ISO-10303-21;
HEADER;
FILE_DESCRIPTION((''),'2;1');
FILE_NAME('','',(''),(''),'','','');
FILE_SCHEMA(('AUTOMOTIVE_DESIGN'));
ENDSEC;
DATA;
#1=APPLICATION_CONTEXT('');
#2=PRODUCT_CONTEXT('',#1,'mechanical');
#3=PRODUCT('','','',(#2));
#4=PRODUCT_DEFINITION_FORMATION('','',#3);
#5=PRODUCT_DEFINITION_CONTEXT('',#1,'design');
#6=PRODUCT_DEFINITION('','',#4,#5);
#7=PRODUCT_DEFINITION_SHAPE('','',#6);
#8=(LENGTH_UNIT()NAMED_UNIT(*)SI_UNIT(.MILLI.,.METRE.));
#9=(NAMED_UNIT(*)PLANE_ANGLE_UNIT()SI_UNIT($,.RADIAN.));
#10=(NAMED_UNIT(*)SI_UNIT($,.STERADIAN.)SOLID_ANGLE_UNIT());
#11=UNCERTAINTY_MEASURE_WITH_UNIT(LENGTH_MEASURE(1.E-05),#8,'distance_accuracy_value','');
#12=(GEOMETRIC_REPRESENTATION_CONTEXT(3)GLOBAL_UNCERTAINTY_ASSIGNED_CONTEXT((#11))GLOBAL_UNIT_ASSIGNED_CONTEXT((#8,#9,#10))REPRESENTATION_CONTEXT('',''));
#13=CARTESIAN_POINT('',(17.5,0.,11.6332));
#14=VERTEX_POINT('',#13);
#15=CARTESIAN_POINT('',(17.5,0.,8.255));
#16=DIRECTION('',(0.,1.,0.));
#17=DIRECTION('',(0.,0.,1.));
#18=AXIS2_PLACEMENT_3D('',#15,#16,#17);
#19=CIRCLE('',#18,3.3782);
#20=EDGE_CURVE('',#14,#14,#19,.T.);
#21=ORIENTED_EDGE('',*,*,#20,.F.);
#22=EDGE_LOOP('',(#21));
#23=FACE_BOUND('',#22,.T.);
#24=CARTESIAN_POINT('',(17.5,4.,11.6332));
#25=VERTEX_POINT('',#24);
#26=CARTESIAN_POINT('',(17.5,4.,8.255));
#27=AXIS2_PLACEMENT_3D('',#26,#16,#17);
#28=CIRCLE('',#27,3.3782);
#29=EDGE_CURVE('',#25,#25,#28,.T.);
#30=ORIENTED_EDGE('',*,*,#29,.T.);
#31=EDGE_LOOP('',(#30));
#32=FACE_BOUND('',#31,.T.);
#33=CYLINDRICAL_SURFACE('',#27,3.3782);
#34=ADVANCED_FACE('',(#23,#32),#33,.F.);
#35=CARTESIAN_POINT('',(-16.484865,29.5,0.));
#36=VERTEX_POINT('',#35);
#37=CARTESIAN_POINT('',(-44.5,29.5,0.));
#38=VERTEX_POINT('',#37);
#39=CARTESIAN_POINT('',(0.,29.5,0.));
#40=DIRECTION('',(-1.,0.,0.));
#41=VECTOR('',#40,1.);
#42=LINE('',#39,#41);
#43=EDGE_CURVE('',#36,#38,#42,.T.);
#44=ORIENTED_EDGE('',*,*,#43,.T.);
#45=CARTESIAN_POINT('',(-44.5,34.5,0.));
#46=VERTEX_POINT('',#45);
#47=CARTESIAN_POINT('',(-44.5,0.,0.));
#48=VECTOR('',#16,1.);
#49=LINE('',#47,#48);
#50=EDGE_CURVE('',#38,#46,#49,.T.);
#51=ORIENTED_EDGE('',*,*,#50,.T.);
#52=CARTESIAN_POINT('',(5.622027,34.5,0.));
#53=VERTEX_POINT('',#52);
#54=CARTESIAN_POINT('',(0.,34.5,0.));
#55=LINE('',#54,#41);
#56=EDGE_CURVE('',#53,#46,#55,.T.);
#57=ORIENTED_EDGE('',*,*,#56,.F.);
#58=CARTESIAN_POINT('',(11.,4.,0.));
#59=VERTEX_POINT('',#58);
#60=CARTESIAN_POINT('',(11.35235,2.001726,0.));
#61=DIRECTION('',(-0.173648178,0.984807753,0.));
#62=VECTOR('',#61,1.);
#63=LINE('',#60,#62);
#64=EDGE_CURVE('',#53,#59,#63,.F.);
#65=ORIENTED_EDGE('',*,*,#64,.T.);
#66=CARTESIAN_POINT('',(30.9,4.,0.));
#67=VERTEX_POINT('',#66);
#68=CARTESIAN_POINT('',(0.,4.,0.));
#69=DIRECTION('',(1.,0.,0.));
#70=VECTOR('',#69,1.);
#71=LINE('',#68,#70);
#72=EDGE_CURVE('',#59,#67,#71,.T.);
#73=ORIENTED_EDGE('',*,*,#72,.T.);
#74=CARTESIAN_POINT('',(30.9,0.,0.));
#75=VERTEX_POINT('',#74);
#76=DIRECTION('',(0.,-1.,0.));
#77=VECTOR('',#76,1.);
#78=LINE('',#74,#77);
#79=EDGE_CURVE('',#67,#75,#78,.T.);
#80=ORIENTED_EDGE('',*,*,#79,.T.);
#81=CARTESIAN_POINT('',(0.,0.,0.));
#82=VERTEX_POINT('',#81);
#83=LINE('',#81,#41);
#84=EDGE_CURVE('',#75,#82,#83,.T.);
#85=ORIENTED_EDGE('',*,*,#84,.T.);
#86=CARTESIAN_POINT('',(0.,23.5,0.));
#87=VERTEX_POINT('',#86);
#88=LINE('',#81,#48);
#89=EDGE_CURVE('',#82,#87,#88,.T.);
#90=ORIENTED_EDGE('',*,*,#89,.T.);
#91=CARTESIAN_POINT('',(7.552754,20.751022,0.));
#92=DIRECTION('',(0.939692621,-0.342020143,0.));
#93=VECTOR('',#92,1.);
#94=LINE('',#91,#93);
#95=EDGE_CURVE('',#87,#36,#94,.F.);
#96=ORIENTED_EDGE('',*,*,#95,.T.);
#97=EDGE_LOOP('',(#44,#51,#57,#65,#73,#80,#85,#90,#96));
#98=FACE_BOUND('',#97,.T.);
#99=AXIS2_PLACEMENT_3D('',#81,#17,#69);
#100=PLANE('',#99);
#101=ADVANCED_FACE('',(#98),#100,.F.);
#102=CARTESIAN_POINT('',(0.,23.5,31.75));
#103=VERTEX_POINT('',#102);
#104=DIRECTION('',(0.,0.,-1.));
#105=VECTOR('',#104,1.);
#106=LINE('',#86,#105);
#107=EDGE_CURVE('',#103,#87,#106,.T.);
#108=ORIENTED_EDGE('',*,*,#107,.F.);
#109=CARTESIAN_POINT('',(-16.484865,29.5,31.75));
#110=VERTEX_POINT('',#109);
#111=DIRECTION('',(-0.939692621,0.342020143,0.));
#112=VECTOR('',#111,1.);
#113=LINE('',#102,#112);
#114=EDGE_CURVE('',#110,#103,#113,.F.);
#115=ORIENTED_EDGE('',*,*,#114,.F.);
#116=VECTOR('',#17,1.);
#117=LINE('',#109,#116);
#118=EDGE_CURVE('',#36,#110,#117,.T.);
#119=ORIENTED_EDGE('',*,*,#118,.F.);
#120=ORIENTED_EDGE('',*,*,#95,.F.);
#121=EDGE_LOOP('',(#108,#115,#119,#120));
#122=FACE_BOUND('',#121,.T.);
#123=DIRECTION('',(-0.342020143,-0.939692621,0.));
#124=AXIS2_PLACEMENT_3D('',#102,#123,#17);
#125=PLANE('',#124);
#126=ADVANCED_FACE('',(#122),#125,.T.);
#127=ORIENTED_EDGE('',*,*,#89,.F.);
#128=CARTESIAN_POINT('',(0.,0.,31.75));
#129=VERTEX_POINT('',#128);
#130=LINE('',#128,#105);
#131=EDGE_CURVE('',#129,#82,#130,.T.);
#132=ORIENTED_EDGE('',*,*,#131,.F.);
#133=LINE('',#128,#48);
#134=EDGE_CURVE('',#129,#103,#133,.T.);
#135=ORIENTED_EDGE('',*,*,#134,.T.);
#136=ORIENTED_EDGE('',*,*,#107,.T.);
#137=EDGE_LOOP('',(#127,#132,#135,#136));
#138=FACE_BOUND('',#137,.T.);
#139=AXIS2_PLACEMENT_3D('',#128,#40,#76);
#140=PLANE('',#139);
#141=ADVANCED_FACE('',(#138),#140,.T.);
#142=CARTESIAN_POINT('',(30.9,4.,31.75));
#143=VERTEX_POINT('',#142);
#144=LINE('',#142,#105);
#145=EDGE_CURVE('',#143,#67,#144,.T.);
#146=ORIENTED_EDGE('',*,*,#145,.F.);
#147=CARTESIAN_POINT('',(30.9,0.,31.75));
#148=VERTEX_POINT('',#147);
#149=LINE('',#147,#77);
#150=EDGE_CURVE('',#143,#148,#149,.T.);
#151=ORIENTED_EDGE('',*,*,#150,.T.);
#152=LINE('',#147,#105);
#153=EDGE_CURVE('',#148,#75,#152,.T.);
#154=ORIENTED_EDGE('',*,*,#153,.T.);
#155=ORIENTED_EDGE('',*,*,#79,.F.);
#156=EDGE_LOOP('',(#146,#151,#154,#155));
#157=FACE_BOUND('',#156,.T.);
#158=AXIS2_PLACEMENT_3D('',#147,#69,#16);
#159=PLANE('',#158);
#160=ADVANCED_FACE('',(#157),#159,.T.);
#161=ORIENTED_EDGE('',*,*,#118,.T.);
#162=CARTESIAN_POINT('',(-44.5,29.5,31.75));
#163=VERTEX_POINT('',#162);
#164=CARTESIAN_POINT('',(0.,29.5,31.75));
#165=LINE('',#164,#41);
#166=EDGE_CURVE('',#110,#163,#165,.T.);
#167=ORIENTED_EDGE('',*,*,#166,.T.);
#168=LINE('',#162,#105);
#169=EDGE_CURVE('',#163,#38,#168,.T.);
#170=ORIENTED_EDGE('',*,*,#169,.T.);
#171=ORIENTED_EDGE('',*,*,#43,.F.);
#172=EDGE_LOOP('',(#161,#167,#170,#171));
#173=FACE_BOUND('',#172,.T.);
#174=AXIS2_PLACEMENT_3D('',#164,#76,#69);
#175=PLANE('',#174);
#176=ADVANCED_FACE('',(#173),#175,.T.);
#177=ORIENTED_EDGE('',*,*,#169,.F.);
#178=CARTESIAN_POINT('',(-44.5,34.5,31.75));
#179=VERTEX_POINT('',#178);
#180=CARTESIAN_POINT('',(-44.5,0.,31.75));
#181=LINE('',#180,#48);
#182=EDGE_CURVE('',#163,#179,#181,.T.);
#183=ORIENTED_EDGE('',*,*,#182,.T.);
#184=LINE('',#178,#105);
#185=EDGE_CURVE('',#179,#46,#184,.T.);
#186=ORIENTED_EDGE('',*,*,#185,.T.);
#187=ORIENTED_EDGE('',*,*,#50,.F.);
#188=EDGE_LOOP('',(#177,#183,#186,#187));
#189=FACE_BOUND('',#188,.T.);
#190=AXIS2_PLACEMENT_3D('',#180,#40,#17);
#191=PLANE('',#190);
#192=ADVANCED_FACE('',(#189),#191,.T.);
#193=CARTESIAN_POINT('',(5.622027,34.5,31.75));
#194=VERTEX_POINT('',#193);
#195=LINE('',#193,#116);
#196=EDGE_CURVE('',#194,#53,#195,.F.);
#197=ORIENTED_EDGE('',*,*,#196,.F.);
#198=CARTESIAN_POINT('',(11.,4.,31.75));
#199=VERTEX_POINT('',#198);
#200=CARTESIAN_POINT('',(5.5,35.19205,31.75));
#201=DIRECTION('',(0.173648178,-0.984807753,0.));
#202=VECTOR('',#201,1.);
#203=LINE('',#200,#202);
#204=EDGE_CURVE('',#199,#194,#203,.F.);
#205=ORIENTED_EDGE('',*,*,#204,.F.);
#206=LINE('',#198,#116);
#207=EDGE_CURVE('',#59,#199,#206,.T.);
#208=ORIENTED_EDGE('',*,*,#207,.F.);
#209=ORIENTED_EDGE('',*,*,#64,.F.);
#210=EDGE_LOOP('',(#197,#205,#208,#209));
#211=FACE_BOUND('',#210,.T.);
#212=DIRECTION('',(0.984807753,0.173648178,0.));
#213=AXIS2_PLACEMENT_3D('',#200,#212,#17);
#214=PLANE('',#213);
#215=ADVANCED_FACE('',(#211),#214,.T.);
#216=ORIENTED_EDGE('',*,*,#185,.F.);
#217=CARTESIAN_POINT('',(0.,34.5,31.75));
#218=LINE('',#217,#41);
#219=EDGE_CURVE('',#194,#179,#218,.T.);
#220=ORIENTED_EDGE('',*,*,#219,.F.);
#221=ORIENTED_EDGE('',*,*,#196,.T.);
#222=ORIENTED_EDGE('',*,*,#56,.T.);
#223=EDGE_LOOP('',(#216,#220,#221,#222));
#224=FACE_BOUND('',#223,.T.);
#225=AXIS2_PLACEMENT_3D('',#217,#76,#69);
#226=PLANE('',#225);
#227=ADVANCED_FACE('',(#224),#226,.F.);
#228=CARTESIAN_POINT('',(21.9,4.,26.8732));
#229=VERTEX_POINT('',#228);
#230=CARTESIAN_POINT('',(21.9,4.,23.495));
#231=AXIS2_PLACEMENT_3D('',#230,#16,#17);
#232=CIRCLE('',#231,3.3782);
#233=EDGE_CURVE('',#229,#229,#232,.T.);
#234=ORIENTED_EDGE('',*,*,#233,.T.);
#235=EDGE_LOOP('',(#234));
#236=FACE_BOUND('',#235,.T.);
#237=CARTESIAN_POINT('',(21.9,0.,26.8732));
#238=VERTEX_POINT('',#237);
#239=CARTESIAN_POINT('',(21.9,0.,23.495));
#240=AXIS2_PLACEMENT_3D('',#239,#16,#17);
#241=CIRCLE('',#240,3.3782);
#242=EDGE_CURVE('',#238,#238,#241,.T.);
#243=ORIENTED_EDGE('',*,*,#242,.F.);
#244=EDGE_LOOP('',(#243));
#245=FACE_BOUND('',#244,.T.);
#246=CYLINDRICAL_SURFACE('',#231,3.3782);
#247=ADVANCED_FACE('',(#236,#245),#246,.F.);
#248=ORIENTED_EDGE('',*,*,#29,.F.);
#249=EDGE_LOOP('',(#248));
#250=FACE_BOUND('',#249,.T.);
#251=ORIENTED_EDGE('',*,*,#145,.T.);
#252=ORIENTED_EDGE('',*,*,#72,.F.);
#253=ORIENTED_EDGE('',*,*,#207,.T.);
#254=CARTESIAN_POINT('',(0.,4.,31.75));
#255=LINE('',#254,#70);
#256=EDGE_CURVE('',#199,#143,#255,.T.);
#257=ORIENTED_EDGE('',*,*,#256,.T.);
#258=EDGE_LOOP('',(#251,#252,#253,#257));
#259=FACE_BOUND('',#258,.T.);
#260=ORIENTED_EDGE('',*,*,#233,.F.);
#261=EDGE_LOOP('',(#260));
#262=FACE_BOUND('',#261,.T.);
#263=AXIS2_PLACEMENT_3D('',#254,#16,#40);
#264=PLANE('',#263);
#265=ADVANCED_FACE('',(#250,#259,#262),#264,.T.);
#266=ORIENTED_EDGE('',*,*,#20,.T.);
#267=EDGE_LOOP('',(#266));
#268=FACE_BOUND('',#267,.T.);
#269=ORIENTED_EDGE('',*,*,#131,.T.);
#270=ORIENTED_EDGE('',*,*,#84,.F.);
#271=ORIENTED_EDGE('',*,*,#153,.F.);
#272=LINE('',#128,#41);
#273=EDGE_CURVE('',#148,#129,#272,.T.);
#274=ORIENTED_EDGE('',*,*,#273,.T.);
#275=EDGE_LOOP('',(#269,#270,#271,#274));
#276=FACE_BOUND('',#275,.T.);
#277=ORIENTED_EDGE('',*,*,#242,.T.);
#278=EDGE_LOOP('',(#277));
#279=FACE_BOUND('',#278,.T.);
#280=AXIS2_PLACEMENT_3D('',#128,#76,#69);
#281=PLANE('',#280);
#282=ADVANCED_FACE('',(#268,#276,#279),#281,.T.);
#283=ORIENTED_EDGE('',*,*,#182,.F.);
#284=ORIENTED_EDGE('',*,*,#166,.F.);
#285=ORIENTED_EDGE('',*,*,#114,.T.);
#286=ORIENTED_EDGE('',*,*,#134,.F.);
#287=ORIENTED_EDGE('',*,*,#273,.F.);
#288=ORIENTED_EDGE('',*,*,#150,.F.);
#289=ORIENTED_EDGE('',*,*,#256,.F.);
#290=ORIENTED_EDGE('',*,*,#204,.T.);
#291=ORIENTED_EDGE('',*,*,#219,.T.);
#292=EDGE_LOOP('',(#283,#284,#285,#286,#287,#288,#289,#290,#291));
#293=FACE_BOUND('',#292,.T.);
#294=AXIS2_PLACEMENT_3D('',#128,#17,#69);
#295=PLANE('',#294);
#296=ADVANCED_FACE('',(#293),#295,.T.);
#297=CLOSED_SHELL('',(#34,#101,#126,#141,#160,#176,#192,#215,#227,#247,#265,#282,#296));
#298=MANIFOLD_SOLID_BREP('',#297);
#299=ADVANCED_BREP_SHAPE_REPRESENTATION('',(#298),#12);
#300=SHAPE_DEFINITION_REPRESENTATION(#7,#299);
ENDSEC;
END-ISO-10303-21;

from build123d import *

# Parameters (mm, degrees)
BOSS_EXTRUDE1_DEPTH     = 31.75
F_1_4_CLEARANCE_HOLE1_D = 6.7564
CHAMFER1_SIZE           = 5.5
CHAMFER1_SIZE_2         = 31.192050008
CHAMFER2_SIZE           = 6
CHAMFER2_SIZE2          = 16.484864517


with BuildPart() as part:
    # Sketch1 → Boss-Extrude1 (new body)
    with BuildSketch(Plane.XY):
        Polygon((30.9, 0), (0, 0), (0, 29.5), (5.5, 29.5), (5.5, 4), (30.9, 4), align=None)
        Polygon((-44.5, 29.5), (0, 29.5), (5.5, 29.5), (5.5, 34.5), (-44.5, 34.5), align=None)
    extrude(amount=BOSS_EXTRUDE1_DEPTH)

    # 1/4 Clearance Hole1 (through all)
    with Locations(Plane(origin=(0, 4, 0), x_dir=(1, 0, 0), z_dir=(0, 1, 0))):
        with Locations((21.9, -23.495), (17.5, -8.255)):
            Hole(F_1_4_CLEARANCE_HOLE1_D / 2)

    # Chamfer1
    # the kernel refuses this chamfer: 31.192050008, 5.5 mm, written as the material it adds along each edge
    with BuildSketch(Plane(origin=(5.5, 4, 0), x_dir=(0.9776715712462578, -0.21013876076743532, 0), z_dir=(0, 0, 1))) as chamfer1_piece_1_section:
        Polygon((CHAMFER1_SIZE * 0.977671571246, CHAMFER1_SIZE * 0.210138760767), (-CHAMFER1_SIZE_2 * 0.210138760767, CHAMFER1_SIZE_2 * 0.977671571243), (0, 0), align=None)
    chamfer1_piece_1 = extrude(amount=31.75, mode=Mode.PRIVATE)
    chamfer1_piece_1 = split(chamfer1_piece_1, bisect_by=Plane(origin=(7.01069263, 34.5, 15.875), z_dir=(0, -1, 0)), keep=Keep.TOP, mode=Mode.PRIVATE)
    add(chamfer1_piece_1)

    # Chamfer2
    chamfer2_edges = [part.edges().sort_by_distance(p)[0] for p in [
        (0, 29.5, 15.875),
    ]]
    chamfer2_side = [part.faces().sort_by_distance(p)[0] for p in [
        (0, 14.75, 15.875),
    ]]
    chamfer(chamfer2_edges, length=CHAMFER2_SIZE, length2=CHAMFER2_SIZE2, reference=chamfer2_side[0])


solid = part.part
